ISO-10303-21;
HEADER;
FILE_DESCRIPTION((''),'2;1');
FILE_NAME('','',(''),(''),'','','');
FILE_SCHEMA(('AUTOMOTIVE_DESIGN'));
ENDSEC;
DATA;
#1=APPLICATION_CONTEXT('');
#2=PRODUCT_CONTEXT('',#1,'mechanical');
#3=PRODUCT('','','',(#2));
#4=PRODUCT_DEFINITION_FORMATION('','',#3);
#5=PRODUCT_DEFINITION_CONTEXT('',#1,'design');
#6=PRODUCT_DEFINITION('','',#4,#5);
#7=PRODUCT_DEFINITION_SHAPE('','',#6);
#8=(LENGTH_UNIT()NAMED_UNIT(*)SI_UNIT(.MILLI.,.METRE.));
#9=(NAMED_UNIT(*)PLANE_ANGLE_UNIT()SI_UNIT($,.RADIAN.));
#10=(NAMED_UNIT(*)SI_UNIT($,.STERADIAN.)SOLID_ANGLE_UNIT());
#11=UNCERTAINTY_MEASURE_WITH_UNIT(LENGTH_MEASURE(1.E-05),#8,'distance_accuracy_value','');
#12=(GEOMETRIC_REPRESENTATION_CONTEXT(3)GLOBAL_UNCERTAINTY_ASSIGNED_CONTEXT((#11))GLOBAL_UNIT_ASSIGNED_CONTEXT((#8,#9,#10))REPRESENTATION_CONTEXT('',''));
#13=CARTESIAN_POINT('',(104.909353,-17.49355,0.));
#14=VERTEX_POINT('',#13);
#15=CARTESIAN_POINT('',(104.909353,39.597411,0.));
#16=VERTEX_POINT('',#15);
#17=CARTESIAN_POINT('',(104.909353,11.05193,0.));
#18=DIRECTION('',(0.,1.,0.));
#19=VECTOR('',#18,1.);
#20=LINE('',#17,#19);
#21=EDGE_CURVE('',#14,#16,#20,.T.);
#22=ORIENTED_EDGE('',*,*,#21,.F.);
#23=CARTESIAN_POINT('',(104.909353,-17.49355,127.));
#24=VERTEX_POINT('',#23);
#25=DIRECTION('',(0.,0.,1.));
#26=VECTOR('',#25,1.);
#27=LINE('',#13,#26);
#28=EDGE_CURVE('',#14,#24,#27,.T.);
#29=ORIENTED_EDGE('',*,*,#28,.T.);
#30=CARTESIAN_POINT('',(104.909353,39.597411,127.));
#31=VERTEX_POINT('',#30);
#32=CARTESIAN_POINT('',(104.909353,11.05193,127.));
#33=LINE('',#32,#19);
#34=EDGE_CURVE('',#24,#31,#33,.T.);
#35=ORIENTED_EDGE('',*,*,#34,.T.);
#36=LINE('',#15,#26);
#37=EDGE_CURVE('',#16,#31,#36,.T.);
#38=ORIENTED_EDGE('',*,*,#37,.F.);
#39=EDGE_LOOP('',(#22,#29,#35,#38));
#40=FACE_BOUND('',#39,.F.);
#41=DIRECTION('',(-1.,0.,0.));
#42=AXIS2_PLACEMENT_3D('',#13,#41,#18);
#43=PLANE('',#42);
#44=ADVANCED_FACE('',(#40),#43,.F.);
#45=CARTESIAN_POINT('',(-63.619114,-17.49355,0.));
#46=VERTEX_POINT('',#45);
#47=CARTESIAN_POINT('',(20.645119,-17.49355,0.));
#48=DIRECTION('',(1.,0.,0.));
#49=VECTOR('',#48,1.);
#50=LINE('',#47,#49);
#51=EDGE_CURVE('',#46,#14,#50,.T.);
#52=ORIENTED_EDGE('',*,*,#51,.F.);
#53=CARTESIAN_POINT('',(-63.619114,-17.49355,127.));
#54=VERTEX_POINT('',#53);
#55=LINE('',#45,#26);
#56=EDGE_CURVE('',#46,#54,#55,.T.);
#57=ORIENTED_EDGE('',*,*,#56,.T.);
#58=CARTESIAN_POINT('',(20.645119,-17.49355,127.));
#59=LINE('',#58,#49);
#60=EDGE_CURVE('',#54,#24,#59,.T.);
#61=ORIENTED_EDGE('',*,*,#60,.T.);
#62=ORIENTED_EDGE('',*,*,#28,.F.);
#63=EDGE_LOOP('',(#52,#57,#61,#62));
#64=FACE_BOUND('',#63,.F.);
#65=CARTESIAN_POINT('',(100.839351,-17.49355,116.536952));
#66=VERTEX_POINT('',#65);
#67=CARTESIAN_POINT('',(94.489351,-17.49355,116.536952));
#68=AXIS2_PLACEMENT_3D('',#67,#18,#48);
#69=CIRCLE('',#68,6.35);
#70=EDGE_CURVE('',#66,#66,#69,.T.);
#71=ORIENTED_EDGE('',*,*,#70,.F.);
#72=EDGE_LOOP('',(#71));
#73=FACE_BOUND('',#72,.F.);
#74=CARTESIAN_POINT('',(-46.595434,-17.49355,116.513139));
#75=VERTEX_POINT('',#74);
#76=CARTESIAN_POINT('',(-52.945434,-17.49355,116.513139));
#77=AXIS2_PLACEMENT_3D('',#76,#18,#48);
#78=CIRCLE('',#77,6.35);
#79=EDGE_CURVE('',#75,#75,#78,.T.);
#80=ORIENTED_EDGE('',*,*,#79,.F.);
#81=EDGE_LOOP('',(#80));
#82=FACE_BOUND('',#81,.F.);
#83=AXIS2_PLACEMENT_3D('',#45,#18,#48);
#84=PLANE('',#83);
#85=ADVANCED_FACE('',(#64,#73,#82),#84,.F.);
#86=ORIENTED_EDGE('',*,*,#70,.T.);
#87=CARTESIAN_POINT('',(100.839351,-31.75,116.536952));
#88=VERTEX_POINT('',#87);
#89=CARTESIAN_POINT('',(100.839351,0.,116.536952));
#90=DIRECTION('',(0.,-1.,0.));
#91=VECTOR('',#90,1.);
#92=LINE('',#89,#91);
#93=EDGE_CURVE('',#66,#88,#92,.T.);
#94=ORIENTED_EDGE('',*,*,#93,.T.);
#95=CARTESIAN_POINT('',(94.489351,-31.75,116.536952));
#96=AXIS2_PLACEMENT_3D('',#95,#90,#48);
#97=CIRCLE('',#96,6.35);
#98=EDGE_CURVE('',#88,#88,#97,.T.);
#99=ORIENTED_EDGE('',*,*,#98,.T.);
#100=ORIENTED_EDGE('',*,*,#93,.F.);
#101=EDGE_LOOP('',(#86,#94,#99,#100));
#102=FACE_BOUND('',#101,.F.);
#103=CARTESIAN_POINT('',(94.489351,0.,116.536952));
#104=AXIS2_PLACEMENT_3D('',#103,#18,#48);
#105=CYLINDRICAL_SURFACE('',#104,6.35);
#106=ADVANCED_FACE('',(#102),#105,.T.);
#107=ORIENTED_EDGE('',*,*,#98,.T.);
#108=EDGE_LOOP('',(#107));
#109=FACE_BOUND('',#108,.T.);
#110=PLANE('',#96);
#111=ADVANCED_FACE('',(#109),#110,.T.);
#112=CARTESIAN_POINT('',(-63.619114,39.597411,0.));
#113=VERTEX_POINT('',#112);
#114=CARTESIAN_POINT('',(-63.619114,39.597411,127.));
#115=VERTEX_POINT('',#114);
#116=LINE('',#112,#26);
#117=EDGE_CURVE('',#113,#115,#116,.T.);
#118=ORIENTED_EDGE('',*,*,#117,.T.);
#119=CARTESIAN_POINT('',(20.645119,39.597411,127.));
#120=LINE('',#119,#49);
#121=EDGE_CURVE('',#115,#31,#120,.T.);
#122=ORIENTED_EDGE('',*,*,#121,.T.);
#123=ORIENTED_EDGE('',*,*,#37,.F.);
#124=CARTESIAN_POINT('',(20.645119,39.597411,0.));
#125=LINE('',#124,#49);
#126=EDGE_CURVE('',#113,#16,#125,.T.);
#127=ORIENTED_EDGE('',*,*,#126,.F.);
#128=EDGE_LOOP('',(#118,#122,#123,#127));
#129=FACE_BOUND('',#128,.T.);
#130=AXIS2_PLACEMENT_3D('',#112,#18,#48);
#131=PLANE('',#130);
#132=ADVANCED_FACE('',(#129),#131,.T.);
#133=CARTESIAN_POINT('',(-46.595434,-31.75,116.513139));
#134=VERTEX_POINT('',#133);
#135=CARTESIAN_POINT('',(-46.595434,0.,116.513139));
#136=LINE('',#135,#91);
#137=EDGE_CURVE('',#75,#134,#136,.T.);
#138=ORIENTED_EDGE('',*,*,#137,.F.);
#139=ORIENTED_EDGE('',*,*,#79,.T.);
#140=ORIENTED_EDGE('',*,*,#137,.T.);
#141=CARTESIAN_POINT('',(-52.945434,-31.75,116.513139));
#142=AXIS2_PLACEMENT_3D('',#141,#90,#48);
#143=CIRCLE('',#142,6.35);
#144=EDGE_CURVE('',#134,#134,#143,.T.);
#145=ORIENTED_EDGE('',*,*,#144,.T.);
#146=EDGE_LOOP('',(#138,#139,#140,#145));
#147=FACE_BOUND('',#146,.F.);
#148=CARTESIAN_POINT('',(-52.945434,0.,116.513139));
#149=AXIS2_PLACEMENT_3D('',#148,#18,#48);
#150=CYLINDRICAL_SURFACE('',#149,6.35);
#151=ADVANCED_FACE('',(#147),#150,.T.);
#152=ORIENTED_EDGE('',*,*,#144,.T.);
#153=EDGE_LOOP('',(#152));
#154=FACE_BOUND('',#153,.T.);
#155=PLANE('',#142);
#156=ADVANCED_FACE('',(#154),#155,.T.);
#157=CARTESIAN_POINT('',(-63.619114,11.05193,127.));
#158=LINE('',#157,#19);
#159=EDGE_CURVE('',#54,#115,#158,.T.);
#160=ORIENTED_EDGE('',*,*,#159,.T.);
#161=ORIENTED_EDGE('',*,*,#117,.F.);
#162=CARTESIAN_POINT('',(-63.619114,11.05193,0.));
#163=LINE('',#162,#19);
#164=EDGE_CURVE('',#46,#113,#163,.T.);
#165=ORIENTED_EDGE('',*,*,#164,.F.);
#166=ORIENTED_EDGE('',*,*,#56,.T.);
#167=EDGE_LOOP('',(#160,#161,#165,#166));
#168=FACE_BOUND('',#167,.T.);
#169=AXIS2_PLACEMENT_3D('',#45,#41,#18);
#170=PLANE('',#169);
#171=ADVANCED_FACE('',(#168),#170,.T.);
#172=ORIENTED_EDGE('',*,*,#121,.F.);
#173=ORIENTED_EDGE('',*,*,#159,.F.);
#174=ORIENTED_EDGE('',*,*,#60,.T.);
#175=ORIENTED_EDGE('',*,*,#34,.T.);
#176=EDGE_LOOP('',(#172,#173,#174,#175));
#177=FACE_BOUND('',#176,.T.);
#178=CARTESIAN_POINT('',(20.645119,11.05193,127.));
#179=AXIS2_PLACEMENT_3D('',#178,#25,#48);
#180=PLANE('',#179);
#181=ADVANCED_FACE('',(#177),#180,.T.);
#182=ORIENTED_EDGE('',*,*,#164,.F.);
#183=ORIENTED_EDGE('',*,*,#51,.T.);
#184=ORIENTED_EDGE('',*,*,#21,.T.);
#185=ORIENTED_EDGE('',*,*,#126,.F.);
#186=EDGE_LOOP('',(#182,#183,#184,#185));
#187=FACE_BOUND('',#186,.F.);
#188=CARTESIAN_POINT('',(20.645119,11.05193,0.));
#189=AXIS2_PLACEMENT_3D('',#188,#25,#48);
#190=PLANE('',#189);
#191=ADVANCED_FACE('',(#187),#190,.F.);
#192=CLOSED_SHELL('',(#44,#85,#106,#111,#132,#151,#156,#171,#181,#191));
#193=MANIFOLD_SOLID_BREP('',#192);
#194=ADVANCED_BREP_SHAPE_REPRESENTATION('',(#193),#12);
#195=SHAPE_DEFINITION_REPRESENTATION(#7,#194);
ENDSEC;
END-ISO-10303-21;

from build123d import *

# Parameters (mm, degrees)
F0_W     = 168.5284674168
F0_H     = 57.090960443
F1_DEPTH = 127
F2_R     = 6.35
F4_DEPTH = 31.75


# Not quite as in the source:
# - the program builds the solid bodies; features that only make, move or delete a surface that nothing else refers to are left out


with BuildPart() as f1:
    # F0 (on Top) → F1 (new body)
    with BuildSketch(Plane.XY):
        with Locations((20.6451192498, 11.0519304872)):
            Rectangle(F0_W, F0_H)
    extrude(amount=F1_DEPTH)

    # F2 (on Front) → F4 (join)
    with BuildSketch(Plane.XZ):
        with Locations((-52.945434434, 116.5131386886)):
            Circle(F2_R)
        with Locations((94.4893505254, 116.5369517954)):
            Circle(F2_R)
    extrude(amount=F4_DEPTH)


solid = f1.part
